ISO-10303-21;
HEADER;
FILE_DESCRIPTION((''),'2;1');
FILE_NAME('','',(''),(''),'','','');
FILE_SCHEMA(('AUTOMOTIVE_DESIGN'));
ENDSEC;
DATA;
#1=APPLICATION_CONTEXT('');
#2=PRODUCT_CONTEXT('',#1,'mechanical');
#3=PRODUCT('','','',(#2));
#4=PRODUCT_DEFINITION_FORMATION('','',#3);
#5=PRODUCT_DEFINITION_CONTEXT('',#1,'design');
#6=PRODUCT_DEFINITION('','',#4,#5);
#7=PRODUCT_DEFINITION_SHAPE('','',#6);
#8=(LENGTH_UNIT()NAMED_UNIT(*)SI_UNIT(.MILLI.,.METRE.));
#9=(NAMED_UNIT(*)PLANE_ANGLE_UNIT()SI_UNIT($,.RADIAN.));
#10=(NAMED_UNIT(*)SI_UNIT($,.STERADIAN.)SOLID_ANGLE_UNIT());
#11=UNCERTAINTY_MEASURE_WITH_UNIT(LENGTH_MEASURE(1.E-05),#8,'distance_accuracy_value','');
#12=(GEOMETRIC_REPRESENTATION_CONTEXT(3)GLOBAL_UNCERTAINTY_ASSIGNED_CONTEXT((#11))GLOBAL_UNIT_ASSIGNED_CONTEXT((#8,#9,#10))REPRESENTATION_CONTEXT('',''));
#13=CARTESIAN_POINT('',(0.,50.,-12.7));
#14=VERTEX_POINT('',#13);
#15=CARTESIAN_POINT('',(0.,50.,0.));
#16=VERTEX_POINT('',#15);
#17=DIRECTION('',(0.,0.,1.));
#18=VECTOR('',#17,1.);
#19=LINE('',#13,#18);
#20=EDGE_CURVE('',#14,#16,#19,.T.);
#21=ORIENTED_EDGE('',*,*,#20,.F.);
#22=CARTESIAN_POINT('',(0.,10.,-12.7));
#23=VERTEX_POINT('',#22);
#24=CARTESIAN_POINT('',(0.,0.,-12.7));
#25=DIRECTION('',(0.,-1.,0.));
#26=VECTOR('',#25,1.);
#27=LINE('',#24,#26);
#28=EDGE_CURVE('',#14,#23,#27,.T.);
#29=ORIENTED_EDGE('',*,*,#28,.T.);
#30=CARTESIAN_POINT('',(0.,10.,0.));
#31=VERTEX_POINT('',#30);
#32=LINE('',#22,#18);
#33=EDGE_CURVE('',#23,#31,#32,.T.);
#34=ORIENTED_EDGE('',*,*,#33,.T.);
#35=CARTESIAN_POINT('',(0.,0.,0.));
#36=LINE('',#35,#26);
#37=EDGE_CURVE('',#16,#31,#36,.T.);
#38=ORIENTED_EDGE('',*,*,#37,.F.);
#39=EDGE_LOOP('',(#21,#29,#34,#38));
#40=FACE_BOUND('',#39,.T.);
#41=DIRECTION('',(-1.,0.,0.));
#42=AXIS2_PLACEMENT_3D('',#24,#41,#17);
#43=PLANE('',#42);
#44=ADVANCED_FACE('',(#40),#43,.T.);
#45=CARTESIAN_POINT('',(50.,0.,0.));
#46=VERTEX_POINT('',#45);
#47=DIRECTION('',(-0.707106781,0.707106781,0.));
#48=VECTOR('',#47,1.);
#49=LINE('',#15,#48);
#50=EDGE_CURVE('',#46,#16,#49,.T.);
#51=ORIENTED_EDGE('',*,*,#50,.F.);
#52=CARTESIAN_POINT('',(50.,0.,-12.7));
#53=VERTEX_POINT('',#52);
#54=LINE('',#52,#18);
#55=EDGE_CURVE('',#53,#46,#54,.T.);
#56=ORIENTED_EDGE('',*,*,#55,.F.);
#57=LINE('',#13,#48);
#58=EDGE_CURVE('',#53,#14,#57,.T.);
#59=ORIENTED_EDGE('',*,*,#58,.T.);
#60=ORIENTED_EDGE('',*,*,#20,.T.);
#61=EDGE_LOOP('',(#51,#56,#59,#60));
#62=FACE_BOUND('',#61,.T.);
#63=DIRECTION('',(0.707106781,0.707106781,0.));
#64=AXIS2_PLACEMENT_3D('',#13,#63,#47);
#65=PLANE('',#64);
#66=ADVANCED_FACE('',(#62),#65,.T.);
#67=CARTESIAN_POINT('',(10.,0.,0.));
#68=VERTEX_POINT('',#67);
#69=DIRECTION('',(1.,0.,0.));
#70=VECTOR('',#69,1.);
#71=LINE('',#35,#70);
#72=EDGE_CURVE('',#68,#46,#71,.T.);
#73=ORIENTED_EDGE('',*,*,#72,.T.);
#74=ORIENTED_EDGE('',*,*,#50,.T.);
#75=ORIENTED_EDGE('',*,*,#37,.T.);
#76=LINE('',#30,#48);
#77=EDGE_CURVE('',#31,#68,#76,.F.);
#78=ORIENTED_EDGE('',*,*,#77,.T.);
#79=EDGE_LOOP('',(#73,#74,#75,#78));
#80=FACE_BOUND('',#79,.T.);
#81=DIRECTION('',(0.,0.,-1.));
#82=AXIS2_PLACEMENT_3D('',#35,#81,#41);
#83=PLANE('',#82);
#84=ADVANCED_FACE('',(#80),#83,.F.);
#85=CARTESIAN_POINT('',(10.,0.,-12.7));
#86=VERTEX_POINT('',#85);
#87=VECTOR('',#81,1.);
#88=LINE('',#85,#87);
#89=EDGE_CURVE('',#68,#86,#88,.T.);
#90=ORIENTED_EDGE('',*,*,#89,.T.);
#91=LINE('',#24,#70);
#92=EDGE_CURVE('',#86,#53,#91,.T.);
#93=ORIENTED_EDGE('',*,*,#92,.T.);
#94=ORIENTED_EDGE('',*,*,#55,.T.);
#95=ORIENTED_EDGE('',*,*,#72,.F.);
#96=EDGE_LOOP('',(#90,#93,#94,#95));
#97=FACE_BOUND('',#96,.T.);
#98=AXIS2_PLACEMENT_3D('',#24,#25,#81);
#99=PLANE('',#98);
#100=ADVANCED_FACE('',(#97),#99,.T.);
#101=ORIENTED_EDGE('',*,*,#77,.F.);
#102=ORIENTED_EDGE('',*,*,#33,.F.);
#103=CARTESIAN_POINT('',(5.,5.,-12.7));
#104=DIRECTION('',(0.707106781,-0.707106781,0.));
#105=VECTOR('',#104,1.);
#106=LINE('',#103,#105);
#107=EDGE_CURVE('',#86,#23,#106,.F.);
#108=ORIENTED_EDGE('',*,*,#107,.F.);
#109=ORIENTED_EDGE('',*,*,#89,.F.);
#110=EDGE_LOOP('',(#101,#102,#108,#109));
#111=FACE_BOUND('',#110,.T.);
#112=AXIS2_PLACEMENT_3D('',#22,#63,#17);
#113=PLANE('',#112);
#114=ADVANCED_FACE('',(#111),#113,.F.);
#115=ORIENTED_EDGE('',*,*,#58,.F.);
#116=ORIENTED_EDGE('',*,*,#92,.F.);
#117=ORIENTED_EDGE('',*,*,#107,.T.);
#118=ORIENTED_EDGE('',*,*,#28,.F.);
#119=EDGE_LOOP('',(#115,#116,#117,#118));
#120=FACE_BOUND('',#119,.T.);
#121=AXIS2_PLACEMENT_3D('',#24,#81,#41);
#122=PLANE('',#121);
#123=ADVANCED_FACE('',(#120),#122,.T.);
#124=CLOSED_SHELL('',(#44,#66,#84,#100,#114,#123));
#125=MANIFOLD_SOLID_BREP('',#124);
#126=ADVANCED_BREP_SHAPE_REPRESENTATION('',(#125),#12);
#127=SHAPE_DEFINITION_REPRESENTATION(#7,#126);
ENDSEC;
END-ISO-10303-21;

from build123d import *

# Parameters (mm, degrees)
FLANGE_BASE1_DEPTH = 12.7
CHANFRO1_SIZE      = 10


# Sheet-metal steps are written as plain solids
with BuildPart() as part:
    # Esboço1 → Flange-base1 (new body)
    with BuildSketch(Plane.XY):
        Polygon((0, 50), (50, 0), (0, 0), align=None)
    extrude(amount=-FLANGE_BASE1_DEPTH)

    # Chanfro1
    chanfro1_edges = [part.edges().sort_by_distance(p)[0] for p in [
        (0, 0, -6.35),
    ]]
    chamfer(chanfro1_edges, length=CHANFRO1_SIZE)


solid = part.part
